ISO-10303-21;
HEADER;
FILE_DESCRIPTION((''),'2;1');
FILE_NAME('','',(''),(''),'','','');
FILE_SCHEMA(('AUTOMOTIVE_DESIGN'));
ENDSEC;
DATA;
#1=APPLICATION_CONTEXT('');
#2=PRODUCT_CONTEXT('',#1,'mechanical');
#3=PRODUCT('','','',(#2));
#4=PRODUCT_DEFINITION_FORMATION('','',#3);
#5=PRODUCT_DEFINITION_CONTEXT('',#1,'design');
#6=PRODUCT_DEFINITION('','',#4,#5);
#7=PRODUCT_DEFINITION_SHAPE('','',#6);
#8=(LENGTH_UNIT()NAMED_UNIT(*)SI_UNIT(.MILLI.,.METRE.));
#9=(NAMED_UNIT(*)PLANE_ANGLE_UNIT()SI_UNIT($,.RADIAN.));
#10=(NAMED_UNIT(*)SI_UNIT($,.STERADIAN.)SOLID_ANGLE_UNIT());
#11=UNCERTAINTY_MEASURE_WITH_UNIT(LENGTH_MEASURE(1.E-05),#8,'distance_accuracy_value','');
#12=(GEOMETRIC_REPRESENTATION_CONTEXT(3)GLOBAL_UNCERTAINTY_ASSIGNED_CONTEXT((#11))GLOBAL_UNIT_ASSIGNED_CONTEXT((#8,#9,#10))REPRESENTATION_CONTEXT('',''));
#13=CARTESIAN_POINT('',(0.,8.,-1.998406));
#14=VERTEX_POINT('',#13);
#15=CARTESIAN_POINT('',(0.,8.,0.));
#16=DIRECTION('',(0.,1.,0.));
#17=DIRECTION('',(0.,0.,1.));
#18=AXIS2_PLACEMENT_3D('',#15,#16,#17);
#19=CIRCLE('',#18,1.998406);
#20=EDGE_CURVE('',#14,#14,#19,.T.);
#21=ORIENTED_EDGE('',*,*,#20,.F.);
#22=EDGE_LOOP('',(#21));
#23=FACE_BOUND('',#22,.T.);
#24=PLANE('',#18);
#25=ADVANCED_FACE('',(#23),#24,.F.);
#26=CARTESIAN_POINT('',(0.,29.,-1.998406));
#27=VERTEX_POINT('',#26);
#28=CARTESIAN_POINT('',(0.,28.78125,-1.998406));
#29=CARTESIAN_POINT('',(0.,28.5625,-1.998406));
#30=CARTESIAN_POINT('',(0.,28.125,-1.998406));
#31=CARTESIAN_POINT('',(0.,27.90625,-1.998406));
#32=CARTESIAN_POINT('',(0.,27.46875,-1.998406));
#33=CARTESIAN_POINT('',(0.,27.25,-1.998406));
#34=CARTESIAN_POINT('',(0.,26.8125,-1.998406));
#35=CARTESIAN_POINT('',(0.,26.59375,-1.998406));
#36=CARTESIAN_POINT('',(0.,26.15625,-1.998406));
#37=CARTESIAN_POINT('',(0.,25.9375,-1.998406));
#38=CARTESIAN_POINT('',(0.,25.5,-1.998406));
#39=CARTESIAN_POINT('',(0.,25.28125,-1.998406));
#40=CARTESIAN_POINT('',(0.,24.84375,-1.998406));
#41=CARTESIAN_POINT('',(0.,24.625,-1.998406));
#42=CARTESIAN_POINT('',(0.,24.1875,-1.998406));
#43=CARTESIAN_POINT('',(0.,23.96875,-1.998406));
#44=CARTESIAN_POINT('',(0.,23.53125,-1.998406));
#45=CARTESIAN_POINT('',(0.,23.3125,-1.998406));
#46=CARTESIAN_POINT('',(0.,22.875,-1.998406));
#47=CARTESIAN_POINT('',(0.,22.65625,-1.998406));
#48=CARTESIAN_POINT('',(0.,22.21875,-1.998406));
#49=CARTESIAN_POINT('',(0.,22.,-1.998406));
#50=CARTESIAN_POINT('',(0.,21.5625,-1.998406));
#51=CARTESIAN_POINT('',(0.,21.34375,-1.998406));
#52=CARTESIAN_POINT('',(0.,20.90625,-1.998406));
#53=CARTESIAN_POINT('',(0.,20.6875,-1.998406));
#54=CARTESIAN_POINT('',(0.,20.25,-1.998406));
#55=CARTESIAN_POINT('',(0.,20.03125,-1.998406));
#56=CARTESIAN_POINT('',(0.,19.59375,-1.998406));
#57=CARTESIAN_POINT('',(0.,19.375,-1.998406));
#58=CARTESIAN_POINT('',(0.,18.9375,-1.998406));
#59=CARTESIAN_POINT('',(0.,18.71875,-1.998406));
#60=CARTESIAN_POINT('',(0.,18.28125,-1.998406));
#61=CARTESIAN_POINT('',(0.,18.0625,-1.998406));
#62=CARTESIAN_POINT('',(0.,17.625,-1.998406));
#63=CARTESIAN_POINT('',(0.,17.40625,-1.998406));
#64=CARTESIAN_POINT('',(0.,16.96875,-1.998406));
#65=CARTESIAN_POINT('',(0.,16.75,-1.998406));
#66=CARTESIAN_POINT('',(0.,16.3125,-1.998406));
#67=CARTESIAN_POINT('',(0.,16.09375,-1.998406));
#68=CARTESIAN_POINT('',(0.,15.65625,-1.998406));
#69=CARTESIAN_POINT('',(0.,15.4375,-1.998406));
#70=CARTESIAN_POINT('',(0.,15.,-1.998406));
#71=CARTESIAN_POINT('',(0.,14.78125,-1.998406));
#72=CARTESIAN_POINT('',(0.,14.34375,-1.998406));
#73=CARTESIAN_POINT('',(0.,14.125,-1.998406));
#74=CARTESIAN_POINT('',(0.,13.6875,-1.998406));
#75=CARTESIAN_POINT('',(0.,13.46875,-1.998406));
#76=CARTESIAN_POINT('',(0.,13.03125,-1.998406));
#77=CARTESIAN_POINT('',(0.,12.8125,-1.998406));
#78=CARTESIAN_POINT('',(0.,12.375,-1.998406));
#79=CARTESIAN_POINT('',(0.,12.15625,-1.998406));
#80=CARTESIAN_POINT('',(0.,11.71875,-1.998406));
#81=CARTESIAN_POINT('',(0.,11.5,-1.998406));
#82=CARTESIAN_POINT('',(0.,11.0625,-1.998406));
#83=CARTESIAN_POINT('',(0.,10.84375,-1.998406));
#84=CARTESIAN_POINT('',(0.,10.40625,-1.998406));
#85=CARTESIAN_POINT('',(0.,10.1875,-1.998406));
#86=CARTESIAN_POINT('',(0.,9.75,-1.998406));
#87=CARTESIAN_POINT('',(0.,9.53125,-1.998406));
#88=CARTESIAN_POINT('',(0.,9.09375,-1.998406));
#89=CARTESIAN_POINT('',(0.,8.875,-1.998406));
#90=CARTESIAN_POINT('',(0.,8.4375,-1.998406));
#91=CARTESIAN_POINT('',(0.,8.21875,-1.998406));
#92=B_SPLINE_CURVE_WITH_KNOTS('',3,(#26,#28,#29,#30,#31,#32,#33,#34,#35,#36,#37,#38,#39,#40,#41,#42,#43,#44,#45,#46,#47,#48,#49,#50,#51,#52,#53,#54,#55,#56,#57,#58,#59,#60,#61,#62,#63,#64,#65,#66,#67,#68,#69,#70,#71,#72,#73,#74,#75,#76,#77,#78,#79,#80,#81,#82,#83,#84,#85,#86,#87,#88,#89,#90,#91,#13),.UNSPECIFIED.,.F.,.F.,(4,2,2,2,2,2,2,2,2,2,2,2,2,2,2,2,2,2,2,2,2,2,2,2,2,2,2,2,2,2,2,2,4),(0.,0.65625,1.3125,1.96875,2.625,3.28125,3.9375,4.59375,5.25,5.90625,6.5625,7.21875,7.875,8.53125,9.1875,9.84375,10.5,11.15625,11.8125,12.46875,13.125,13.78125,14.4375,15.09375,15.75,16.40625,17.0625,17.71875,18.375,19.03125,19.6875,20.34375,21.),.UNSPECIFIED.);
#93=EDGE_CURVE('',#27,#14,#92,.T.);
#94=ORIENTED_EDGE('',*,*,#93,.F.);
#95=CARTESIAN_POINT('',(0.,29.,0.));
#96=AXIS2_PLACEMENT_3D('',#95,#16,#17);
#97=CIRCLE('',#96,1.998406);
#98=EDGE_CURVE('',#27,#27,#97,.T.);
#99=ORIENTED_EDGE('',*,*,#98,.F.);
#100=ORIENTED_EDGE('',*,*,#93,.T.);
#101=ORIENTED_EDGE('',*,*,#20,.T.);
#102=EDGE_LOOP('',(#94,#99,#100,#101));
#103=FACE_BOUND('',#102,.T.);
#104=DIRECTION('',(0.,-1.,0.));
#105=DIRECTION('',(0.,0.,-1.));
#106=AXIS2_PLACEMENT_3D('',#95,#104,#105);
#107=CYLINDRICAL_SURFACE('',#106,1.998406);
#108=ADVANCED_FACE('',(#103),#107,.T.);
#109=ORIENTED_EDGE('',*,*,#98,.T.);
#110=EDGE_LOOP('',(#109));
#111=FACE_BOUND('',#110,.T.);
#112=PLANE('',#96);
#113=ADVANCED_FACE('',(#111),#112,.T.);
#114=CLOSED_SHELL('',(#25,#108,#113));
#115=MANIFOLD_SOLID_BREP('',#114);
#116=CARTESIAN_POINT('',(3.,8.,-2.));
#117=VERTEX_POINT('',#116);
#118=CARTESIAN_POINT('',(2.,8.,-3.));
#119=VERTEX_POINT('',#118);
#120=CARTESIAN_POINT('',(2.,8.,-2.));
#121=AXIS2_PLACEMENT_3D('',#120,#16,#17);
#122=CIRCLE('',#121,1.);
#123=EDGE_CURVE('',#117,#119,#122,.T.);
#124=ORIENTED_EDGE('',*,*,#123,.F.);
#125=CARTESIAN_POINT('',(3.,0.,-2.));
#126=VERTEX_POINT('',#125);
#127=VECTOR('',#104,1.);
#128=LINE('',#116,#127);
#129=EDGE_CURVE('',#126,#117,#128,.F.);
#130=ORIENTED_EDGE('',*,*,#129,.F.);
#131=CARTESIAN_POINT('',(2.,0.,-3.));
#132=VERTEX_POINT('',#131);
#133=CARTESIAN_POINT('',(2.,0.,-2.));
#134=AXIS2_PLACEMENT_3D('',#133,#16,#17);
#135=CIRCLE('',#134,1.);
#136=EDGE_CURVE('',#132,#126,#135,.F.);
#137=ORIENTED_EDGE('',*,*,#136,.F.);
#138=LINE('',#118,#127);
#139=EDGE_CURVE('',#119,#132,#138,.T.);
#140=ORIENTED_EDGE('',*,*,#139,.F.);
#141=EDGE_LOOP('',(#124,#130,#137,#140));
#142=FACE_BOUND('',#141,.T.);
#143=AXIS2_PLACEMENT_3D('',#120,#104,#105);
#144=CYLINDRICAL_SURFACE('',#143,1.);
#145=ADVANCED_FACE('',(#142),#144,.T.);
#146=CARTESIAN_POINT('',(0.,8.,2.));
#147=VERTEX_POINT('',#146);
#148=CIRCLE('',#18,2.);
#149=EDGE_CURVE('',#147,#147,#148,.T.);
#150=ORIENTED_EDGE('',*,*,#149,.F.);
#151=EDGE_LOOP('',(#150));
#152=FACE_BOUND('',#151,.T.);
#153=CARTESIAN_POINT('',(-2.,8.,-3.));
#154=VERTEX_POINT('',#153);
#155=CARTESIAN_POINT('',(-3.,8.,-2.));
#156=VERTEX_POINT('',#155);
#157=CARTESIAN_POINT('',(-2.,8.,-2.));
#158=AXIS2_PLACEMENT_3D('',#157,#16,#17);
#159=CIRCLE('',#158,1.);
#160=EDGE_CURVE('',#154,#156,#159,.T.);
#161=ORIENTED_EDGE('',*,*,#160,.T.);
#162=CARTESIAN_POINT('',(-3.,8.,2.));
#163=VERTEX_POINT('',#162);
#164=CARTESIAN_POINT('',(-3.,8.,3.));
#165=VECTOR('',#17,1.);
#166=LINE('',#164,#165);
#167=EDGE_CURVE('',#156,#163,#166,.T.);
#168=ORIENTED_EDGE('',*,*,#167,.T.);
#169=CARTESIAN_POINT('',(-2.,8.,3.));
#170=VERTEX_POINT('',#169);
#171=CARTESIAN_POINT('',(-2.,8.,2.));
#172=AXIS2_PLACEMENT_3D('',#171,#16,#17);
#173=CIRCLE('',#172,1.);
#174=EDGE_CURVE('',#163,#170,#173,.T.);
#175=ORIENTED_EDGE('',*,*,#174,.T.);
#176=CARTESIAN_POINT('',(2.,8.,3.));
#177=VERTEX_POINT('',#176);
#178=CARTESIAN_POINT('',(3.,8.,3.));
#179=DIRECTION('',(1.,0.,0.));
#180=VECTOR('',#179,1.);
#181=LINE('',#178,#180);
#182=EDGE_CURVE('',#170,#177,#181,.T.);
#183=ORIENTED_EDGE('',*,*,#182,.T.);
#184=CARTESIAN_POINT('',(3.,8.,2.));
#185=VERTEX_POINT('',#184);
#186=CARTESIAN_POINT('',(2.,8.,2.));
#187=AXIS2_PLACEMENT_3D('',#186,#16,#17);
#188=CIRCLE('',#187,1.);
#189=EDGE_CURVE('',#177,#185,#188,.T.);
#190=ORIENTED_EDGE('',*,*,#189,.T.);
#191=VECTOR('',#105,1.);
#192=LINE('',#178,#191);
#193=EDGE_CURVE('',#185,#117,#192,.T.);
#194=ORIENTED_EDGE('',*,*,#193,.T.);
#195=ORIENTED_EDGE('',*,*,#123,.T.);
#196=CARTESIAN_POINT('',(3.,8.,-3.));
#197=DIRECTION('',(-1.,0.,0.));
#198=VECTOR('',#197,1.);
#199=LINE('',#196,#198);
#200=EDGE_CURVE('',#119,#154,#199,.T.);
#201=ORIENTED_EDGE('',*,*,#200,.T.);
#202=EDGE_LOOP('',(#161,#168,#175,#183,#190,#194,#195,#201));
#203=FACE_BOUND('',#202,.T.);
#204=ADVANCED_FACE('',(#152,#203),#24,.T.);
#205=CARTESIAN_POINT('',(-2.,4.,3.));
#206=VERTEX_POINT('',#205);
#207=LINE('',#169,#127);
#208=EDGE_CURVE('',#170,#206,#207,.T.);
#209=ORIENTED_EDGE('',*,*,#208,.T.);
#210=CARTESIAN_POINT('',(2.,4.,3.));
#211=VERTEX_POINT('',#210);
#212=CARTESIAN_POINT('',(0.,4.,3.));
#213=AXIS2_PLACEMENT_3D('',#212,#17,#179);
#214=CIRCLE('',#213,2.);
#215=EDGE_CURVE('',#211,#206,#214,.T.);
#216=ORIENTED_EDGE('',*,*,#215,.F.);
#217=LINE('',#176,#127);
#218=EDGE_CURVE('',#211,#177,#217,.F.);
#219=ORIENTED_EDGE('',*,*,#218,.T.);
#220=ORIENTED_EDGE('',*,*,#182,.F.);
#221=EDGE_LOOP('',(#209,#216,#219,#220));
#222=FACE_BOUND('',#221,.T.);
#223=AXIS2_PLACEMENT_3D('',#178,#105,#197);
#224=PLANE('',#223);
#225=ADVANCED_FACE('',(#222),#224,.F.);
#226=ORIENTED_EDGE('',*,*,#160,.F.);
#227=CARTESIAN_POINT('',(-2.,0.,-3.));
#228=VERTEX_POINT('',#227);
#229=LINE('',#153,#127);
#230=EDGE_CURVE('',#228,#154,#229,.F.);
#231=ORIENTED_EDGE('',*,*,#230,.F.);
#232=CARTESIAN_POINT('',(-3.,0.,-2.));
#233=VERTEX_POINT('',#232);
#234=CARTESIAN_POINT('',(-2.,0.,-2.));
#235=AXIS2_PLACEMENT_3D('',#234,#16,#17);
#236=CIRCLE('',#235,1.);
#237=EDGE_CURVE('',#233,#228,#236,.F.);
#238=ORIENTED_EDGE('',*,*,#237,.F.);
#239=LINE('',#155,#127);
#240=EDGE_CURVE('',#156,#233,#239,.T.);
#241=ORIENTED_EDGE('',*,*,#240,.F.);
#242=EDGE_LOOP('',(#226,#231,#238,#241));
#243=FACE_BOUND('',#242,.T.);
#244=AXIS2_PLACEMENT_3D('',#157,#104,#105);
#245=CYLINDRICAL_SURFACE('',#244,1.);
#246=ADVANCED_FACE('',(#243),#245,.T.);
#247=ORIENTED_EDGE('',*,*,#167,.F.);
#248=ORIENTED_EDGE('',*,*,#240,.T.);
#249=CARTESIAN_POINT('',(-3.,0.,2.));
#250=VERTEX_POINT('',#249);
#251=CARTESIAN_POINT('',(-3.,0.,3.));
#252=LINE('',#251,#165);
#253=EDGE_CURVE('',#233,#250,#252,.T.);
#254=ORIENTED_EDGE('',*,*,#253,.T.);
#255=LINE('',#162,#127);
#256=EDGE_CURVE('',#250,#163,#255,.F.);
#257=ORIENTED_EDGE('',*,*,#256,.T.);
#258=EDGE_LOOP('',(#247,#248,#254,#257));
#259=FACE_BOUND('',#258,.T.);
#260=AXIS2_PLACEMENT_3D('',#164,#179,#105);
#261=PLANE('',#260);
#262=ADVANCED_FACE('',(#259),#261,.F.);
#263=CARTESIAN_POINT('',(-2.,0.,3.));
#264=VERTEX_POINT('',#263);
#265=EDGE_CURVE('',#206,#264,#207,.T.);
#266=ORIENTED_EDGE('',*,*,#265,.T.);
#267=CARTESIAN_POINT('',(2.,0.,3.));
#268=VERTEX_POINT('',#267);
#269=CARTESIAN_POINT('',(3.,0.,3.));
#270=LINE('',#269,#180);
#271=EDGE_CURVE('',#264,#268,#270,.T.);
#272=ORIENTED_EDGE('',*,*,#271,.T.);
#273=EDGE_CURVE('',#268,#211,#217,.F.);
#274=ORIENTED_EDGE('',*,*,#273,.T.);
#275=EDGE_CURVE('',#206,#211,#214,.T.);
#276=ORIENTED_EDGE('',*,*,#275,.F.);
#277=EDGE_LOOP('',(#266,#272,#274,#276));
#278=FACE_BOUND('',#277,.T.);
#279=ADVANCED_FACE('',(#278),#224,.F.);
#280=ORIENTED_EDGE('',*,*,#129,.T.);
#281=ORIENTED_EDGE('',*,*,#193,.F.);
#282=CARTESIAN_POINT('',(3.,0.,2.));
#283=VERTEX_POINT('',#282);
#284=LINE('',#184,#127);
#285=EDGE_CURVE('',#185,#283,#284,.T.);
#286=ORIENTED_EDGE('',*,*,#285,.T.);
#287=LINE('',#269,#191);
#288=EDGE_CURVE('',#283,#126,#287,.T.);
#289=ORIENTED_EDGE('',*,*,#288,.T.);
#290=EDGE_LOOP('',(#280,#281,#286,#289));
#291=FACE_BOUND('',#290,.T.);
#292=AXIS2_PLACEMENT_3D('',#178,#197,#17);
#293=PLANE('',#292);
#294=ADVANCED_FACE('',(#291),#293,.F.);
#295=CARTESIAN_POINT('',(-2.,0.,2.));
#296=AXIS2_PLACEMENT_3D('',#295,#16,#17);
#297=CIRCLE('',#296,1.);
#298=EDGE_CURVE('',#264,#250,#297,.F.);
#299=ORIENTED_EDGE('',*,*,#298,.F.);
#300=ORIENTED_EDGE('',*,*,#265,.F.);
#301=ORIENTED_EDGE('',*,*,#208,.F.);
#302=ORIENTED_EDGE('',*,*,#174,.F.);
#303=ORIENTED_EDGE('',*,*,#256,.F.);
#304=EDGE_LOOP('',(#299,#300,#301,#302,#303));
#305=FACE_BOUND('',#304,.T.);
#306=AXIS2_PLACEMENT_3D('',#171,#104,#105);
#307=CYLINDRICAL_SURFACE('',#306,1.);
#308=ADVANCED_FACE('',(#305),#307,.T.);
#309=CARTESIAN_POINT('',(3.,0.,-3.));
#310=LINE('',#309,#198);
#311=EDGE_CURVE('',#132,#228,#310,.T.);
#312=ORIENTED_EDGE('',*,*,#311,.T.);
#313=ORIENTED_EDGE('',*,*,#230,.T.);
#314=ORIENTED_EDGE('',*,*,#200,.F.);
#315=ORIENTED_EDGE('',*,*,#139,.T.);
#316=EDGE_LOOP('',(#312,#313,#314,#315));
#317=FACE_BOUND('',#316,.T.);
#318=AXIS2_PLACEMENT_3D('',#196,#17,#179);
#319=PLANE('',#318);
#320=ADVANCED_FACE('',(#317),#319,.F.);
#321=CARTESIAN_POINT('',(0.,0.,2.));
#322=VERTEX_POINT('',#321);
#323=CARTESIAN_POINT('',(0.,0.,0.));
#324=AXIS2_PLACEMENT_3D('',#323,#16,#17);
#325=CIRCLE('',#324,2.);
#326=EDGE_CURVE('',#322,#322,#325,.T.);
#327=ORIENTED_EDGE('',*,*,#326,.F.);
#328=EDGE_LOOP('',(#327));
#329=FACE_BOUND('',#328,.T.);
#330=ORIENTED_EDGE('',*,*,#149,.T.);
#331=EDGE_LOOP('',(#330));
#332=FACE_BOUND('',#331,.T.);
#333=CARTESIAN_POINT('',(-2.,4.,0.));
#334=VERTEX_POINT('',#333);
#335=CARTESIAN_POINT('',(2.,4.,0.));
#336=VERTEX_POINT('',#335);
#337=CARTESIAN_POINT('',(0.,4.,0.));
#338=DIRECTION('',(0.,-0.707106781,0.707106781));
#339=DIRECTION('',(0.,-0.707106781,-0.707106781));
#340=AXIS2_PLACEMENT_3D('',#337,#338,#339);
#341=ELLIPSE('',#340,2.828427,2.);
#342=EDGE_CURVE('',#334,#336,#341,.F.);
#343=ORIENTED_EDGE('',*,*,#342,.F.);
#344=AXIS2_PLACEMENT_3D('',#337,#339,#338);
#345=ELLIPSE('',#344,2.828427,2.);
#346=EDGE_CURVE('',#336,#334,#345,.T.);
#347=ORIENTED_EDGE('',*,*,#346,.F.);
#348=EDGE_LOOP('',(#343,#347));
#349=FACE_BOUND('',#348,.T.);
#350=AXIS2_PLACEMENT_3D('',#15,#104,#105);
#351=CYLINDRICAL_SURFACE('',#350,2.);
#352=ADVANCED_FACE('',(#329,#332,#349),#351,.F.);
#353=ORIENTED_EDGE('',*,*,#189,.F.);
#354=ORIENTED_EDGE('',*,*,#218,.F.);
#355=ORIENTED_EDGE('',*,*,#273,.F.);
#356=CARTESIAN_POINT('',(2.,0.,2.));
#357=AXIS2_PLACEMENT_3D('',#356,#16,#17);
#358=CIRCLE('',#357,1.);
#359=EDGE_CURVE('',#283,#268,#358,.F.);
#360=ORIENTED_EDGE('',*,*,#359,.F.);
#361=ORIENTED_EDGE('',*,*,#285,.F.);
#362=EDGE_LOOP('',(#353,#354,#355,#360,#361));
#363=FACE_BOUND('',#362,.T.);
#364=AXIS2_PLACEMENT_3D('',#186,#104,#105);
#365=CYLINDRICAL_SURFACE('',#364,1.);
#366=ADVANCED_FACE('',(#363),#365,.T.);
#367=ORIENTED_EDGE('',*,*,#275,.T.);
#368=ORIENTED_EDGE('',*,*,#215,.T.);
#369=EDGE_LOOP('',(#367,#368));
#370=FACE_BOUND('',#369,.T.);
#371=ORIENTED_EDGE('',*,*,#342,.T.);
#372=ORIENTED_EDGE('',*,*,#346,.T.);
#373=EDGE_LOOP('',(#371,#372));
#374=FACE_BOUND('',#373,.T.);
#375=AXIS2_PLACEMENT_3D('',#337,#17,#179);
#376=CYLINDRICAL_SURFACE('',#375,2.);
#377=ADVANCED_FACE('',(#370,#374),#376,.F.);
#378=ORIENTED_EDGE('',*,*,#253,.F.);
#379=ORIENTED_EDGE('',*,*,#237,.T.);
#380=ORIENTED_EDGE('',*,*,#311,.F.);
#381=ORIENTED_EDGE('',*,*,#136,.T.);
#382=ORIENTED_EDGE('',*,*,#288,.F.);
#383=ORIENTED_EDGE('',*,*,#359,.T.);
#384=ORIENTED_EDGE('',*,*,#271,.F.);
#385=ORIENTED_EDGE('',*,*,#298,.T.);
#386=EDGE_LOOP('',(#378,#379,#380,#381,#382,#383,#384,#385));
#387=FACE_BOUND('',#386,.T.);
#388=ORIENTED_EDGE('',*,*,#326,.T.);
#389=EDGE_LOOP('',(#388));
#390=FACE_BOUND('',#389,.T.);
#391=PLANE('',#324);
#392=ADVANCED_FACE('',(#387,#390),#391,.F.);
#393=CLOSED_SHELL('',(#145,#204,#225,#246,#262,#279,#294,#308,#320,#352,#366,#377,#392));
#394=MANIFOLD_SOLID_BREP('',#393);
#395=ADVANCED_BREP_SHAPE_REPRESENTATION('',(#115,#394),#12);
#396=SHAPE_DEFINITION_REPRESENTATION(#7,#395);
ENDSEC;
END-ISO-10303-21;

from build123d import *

# Parameters (mm, degrees)
SKETCH1_W           = 6
SKETCH1_H           = 6
SKETCH1_R           = 2
BOSS_EXTRUDE1_DEPTH = 8
SKETCH2_R           = 1.99840551
BOSS_EXTRUDE2_DEPTH = 21
SKETCH3_R           = 2
CUT_EXTRUDE1_DEPTH  = 3
FILLET1_R           = 1


with BuildPart() as part:
    # Sketch1 → Boss-Extrude1 (new body)
    with BuildSketch(Plane(origin=(0, 0, 0), x_dir=(1, 0, 0), z_dir=(0, 1, 0))):
        Rectangle(SKETCH1_W, SKETCH1_H)
        with Locations(Location((0, 0, 0), (0, 0, 270))):
            Circle(SKETCH1_R, mode=Mode.SUBTRACT)
    extrude(amount=BOSS_EXTRUDE1_DEPTH)

    # Sketch3 → Cut-Extrude1 (cut)
    with BuildSketch(Plane.XY.offset(3)):
        with Locations((0, 4)):
            Circle(SKETCH3_R)
    extrude(amount=-CUT_EXTRUDE1_DEPTH, mode=Mode.SUBTRACT)

    # Fillet1
    fillet1_edges = [part.edges().sort_by_distance(p)[0] for p in [
        (-3, 4, -3),
        (3, 4, -3),
        (3, 4, 3),
        (-3, 4, 3),
    ]]
    fillet(fillet1_edges, radius=FILLET1_R - 0.0001)  # a hair under: the kernel refuses the full size


with BuildPart() as body_2:
    # Sketch2 → Boss-Extrude2 (new body)
    with BuildSketch(Plane(origin=(0, 8, 0), x_dir=(1, 0, 0), z_dir=(0, 1, 0))):
        with Locations(Location((0, 0, 0), (0, 0, 90))):
            Circle(SKETCH2_R)
    extrude(amount=BOSS_EXTRUDE2_DEPTH)


solid = Compound([part.part, body_2.part])
